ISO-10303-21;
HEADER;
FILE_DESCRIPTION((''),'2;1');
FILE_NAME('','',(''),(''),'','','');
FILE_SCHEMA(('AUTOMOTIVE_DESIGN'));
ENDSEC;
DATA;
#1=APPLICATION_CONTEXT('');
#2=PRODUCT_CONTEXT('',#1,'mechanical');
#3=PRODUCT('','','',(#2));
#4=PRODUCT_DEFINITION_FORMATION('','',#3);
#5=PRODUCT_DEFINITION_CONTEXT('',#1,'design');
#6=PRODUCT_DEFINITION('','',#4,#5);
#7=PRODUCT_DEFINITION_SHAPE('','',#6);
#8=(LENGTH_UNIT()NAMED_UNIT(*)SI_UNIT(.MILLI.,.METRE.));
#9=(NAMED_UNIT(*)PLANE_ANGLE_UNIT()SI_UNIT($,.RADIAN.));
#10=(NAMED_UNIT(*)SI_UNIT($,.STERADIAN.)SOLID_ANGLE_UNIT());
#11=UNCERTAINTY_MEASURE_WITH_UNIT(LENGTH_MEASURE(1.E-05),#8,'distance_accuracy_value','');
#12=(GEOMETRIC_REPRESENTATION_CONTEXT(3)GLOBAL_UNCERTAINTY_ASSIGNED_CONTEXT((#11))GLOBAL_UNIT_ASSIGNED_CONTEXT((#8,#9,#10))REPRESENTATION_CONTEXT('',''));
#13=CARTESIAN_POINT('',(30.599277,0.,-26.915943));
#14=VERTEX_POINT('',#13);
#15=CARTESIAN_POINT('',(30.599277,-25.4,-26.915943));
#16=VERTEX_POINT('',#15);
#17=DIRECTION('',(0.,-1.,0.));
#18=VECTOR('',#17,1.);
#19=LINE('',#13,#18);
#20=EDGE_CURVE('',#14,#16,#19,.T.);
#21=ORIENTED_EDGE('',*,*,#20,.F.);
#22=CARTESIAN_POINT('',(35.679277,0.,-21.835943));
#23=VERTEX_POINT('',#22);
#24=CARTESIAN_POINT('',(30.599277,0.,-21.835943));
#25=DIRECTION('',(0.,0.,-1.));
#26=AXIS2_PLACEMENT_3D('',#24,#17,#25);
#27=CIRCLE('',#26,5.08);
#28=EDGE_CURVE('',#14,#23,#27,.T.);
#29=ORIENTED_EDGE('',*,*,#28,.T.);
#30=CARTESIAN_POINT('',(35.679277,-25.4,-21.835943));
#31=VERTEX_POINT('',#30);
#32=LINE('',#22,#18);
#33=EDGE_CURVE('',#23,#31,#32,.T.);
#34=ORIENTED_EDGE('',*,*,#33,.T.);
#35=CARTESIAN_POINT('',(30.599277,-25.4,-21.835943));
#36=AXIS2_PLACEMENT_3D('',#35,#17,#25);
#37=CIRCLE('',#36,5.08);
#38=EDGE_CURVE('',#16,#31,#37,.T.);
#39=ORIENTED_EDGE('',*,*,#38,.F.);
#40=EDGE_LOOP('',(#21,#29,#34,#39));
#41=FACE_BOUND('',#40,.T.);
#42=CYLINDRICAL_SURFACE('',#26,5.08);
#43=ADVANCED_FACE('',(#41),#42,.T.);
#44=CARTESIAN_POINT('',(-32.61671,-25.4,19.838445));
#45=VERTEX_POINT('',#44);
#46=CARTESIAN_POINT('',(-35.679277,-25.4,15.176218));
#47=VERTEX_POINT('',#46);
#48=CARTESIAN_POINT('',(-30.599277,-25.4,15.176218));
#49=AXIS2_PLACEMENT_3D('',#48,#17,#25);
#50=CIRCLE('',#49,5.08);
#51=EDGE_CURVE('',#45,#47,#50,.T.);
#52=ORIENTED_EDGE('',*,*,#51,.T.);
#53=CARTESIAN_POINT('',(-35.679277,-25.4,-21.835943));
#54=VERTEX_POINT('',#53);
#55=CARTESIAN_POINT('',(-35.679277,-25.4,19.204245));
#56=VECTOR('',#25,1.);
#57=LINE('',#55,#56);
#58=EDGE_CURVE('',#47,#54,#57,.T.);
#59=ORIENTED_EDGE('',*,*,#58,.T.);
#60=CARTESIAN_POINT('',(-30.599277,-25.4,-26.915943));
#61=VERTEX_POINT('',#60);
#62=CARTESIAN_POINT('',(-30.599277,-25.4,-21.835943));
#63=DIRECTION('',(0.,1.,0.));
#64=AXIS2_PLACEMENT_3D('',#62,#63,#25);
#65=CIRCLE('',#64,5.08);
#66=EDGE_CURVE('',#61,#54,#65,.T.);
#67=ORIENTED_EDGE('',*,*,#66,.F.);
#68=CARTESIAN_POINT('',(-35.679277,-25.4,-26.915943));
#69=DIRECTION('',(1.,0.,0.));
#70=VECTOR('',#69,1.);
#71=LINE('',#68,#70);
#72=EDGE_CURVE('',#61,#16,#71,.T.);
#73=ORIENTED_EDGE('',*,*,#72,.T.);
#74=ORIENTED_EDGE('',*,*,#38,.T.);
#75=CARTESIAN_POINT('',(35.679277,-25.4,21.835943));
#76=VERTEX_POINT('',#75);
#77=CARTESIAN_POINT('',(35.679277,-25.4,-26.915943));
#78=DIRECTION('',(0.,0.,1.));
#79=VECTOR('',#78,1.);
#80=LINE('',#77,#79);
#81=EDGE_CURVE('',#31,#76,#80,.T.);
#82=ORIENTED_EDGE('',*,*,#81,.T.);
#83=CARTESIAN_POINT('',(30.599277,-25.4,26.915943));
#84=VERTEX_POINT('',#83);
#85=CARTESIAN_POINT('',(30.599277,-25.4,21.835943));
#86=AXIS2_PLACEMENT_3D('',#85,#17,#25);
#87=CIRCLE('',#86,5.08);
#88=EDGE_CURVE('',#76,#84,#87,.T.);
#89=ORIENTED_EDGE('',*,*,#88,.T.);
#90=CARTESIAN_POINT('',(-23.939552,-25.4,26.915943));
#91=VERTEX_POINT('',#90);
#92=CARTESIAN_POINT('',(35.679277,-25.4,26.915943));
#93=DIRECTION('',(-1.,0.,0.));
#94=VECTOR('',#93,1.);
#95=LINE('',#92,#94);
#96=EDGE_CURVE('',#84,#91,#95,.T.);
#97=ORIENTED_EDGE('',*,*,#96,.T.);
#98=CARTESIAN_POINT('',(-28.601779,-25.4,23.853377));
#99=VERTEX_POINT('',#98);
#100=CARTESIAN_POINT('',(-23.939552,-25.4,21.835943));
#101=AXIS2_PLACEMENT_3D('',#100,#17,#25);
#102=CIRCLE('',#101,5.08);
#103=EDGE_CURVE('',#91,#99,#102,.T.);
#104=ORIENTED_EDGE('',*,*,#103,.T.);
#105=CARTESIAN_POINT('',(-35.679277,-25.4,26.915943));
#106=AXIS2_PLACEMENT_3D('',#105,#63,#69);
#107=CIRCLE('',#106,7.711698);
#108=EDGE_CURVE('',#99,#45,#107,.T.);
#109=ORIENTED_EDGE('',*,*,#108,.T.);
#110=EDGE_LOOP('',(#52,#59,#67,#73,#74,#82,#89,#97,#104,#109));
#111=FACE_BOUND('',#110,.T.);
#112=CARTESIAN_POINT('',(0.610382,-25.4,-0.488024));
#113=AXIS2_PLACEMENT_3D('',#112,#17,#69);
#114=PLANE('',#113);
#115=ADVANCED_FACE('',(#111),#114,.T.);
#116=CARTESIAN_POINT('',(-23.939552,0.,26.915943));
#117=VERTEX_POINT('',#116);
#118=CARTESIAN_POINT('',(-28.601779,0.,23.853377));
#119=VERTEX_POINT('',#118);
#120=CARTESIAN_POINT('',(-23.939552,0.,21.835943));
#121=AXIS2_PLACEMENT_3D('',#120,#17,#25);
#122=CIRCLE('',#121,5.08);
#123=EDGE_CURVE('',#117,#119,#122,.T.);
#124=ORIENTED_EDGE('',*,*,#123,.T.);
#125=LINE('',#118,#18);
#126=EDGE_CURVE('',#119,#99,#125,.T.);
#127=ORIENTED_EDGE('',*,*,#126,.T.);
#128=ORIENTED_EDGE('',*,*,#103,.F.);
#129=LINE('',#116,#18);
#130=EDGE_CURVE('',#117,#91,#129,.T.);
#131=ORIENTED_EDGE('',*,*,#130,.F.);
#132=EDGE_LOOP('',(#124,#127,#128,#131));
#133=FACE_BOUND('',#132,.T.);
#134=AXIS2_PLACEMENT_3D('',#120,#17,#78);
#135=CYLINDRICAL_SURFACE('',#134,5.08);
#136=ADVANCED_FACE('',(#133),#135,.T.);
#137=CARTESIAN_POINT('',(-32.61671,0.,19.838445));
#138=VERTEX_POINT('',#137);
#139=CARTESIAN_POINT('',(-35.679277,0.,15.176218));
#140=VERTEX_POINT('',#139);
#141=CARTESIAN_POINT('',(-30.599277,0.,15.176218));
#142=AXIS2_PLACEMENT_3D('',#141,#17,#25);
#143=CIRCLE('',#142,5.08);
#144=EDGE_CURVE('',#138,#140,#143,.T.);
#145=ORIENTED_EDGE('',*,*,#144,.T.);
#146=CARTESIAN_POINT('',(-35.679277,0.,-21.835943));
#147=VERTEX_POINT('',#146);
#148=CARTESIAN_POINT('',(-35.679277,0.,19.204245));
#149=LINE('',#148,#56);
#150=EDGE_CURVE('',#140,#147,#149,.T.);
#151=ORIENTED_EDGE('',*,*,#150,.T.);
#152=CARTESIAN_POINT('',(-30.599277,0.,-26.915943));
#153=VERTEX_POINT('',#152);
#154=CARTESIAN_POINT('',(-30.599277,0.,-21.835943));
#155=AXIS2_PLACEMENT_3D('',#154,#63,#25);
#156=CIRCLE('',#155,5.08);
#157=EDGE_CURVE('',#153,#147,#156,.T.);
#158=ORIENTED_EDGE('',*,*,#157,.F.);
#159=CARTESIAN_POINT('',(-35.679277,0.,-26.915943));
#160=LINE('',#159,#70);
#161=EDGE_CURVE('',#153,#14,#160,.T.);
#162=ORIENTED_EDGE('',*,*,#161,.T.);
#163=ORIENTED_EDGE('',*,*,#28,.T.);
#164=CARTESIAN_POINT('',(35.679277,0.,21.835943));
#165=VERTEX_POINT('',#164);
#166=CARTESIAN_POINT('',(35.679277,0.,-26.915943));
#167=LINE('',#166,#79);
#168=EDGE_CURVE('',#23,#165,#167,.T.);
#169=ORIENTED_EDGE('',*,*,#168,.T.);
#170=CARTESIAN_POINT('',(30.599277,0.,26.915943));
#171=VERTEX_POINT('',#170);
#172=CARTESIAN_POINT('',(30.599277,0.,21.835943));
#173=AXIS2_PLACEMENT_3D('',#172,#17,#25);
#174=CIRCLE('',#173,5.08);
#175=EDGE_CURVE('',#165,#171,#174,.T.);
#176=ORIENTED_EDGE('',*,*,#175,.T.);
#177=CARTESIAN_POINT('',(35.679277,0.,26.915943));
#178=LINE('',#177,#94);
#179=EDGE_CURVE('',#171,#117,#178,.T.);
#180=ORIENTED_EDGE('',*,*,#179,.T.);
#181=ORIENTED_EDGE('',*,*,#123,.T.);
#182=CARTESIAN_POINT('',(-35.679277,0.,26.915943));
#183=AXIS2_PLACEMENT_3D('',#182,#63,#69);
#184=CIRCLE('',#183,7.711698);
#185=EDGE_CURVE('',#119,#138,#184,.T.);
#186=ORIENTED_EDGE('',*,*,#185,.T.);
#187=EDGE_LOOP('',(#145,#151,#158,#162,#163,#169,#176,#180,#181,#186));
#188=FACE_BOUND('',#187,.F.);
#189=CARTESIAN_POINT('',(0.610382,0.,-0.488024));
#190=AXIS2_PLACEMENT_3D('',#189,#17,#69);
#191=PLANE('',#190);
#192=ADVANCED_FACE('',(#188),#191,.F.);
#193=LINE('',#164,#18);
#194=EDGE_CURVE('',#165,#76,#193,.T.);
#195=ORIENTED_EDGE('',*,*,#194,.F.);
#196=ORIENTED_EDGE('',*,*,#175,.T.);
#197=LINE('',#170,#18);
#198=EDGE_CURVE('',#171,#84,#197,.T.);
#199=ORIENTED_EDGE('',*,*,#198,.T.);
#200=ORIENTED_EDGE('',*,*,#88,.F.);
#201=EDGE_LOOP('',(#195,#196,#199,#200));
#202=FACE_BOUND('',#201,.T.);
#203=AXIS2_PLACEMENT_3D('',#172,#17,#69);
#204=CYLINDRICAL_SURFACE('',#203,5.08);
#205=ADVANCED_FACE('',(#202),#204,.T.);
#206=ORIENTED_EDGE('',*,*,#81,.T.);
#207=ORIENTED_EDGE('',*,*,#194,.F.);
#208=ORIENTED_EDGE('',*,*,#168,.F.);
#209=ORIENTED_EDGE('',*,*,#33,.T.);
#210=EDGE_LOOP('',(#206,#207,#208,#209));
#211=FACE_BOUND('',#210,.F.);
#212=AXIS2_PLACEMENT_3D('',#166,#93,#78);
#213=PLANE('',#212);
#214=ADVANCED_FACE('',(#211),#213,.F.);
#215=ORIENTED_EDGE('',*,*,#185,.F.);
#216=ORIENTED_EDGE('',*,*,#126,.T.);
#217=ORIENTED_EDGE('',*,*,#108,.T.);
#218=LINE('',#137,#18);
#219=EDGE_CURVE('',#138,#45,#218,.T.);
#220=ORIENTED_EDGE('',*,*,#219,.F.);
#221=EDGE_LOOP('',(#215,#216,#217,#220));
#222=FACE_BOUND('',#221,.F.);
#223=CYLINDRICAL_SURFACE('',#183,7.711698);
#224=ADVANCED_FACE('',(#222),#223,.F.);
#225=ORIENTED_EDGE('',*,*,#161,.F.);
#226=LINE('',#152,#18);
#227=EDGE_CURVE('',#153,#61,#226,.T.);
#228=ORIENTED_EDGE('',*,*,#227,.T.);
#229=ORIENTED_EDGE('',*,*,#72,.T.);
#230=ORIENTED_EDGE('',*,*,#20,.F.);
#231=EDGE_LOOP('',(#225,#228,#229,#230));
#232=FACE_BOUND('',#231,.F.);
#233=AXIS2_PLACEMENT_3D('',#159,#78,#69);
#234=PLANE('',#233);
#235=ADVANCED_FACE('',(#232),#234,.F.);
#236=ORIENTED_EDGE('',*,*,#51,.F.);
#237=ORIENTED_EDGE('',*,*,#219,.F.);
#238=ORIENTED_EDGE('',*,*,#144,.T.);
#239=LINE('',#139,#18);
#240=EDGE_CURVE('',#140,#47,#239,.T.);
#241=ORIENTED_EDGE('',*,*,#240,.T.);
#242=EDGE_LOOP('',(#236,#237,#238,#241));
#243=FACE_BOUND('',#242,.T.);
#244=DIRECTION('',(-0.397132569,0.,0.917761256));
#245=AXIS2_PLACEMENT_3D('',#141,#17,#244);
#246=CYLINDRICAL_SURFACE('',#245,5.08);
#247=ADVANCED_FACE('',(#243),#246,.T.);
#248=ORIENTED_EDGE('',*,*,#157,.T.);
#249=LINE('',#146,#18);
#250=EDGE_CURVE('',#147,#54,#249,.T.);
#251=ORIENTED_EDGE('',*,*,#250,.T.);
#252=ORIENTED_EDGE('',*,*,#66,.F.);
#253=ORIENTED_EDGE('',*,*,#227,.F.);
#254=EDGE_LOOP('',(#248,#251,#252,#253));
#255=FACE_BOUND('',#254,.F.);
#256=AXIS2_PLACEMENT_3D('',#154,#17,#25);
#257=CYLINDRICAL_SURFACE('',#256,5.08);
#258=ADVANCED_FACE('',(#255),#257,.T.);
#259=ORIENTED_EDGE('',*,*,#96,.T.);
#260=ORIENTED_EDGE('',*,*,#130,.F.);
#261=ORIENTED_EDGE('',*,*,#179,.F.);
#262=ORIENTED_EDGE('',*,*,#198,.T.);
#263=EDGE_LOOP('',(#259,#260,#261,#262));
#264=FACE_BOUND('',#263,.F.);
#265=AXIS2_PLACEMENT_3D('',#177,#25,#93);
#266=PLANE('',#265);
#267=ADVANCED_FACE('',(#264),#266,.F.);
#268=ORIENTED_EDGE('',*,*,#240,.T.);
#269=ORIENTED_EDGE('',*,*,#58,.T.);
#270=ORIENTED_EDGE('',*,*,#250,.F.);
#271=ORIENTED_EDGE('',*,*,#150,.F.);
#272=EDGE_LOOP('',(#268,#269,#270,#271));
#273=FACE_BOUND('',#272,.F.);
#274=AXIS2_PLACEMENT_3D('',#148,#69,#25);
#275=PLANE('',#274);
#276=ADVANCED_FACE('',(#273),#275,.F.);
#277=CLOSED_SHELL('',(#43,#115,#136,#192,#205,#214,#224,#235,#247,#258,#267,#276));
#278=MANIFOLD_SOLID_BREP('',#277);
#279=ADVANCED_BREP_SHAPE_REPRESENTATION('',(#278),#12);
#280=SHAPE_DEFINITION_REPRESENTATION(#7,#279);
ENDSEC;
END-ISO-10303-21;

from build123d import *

# Parameters (mm, degrees)
F1_DEPTH = 25.4
F2_R     = 5.08


with BuildPart() as f1:
    # F0 (on Front) → F1 (new body)
    with BuildSketch(Plane.XZ):
        with BuildLine():
            Line((-35.6792770326, -26.9159432501), (35.6792770326, -26.9159432501))
            Line((35.6792770326, -26.9159432501), (35.6792770326, 26.9159432501))
            Line((35.6792770326, 26.9159432501), (-27.9675787613, 26.9159432501))
            ThreePointArc((-27.9675787613, 26.9159432501), (-30.2262828905, 21.462949108), (-35.6792770326, 19.2042449788))
            Line((-35.6792770326, 19.2042449788), (-35.6792770326, -26.9159432501))
        make_face()
    extrude(amount=F1_DEPTH)

    # F2
    f2_edges = [f1.edges().sort_by_distance(p)[0] for p in [
        (35.679277, -12.7, 26.915943),
        (-35.679277, -12.7, -26.915943),
        (35.679277, -12.7, -26.915943),
        (-35.679277, -12.7, 19.204245),
        (-27.967579, -12.7, 26.915943),
    ]]
    fillet(f2_edges, radius=F2_R)


solid = f1.part
